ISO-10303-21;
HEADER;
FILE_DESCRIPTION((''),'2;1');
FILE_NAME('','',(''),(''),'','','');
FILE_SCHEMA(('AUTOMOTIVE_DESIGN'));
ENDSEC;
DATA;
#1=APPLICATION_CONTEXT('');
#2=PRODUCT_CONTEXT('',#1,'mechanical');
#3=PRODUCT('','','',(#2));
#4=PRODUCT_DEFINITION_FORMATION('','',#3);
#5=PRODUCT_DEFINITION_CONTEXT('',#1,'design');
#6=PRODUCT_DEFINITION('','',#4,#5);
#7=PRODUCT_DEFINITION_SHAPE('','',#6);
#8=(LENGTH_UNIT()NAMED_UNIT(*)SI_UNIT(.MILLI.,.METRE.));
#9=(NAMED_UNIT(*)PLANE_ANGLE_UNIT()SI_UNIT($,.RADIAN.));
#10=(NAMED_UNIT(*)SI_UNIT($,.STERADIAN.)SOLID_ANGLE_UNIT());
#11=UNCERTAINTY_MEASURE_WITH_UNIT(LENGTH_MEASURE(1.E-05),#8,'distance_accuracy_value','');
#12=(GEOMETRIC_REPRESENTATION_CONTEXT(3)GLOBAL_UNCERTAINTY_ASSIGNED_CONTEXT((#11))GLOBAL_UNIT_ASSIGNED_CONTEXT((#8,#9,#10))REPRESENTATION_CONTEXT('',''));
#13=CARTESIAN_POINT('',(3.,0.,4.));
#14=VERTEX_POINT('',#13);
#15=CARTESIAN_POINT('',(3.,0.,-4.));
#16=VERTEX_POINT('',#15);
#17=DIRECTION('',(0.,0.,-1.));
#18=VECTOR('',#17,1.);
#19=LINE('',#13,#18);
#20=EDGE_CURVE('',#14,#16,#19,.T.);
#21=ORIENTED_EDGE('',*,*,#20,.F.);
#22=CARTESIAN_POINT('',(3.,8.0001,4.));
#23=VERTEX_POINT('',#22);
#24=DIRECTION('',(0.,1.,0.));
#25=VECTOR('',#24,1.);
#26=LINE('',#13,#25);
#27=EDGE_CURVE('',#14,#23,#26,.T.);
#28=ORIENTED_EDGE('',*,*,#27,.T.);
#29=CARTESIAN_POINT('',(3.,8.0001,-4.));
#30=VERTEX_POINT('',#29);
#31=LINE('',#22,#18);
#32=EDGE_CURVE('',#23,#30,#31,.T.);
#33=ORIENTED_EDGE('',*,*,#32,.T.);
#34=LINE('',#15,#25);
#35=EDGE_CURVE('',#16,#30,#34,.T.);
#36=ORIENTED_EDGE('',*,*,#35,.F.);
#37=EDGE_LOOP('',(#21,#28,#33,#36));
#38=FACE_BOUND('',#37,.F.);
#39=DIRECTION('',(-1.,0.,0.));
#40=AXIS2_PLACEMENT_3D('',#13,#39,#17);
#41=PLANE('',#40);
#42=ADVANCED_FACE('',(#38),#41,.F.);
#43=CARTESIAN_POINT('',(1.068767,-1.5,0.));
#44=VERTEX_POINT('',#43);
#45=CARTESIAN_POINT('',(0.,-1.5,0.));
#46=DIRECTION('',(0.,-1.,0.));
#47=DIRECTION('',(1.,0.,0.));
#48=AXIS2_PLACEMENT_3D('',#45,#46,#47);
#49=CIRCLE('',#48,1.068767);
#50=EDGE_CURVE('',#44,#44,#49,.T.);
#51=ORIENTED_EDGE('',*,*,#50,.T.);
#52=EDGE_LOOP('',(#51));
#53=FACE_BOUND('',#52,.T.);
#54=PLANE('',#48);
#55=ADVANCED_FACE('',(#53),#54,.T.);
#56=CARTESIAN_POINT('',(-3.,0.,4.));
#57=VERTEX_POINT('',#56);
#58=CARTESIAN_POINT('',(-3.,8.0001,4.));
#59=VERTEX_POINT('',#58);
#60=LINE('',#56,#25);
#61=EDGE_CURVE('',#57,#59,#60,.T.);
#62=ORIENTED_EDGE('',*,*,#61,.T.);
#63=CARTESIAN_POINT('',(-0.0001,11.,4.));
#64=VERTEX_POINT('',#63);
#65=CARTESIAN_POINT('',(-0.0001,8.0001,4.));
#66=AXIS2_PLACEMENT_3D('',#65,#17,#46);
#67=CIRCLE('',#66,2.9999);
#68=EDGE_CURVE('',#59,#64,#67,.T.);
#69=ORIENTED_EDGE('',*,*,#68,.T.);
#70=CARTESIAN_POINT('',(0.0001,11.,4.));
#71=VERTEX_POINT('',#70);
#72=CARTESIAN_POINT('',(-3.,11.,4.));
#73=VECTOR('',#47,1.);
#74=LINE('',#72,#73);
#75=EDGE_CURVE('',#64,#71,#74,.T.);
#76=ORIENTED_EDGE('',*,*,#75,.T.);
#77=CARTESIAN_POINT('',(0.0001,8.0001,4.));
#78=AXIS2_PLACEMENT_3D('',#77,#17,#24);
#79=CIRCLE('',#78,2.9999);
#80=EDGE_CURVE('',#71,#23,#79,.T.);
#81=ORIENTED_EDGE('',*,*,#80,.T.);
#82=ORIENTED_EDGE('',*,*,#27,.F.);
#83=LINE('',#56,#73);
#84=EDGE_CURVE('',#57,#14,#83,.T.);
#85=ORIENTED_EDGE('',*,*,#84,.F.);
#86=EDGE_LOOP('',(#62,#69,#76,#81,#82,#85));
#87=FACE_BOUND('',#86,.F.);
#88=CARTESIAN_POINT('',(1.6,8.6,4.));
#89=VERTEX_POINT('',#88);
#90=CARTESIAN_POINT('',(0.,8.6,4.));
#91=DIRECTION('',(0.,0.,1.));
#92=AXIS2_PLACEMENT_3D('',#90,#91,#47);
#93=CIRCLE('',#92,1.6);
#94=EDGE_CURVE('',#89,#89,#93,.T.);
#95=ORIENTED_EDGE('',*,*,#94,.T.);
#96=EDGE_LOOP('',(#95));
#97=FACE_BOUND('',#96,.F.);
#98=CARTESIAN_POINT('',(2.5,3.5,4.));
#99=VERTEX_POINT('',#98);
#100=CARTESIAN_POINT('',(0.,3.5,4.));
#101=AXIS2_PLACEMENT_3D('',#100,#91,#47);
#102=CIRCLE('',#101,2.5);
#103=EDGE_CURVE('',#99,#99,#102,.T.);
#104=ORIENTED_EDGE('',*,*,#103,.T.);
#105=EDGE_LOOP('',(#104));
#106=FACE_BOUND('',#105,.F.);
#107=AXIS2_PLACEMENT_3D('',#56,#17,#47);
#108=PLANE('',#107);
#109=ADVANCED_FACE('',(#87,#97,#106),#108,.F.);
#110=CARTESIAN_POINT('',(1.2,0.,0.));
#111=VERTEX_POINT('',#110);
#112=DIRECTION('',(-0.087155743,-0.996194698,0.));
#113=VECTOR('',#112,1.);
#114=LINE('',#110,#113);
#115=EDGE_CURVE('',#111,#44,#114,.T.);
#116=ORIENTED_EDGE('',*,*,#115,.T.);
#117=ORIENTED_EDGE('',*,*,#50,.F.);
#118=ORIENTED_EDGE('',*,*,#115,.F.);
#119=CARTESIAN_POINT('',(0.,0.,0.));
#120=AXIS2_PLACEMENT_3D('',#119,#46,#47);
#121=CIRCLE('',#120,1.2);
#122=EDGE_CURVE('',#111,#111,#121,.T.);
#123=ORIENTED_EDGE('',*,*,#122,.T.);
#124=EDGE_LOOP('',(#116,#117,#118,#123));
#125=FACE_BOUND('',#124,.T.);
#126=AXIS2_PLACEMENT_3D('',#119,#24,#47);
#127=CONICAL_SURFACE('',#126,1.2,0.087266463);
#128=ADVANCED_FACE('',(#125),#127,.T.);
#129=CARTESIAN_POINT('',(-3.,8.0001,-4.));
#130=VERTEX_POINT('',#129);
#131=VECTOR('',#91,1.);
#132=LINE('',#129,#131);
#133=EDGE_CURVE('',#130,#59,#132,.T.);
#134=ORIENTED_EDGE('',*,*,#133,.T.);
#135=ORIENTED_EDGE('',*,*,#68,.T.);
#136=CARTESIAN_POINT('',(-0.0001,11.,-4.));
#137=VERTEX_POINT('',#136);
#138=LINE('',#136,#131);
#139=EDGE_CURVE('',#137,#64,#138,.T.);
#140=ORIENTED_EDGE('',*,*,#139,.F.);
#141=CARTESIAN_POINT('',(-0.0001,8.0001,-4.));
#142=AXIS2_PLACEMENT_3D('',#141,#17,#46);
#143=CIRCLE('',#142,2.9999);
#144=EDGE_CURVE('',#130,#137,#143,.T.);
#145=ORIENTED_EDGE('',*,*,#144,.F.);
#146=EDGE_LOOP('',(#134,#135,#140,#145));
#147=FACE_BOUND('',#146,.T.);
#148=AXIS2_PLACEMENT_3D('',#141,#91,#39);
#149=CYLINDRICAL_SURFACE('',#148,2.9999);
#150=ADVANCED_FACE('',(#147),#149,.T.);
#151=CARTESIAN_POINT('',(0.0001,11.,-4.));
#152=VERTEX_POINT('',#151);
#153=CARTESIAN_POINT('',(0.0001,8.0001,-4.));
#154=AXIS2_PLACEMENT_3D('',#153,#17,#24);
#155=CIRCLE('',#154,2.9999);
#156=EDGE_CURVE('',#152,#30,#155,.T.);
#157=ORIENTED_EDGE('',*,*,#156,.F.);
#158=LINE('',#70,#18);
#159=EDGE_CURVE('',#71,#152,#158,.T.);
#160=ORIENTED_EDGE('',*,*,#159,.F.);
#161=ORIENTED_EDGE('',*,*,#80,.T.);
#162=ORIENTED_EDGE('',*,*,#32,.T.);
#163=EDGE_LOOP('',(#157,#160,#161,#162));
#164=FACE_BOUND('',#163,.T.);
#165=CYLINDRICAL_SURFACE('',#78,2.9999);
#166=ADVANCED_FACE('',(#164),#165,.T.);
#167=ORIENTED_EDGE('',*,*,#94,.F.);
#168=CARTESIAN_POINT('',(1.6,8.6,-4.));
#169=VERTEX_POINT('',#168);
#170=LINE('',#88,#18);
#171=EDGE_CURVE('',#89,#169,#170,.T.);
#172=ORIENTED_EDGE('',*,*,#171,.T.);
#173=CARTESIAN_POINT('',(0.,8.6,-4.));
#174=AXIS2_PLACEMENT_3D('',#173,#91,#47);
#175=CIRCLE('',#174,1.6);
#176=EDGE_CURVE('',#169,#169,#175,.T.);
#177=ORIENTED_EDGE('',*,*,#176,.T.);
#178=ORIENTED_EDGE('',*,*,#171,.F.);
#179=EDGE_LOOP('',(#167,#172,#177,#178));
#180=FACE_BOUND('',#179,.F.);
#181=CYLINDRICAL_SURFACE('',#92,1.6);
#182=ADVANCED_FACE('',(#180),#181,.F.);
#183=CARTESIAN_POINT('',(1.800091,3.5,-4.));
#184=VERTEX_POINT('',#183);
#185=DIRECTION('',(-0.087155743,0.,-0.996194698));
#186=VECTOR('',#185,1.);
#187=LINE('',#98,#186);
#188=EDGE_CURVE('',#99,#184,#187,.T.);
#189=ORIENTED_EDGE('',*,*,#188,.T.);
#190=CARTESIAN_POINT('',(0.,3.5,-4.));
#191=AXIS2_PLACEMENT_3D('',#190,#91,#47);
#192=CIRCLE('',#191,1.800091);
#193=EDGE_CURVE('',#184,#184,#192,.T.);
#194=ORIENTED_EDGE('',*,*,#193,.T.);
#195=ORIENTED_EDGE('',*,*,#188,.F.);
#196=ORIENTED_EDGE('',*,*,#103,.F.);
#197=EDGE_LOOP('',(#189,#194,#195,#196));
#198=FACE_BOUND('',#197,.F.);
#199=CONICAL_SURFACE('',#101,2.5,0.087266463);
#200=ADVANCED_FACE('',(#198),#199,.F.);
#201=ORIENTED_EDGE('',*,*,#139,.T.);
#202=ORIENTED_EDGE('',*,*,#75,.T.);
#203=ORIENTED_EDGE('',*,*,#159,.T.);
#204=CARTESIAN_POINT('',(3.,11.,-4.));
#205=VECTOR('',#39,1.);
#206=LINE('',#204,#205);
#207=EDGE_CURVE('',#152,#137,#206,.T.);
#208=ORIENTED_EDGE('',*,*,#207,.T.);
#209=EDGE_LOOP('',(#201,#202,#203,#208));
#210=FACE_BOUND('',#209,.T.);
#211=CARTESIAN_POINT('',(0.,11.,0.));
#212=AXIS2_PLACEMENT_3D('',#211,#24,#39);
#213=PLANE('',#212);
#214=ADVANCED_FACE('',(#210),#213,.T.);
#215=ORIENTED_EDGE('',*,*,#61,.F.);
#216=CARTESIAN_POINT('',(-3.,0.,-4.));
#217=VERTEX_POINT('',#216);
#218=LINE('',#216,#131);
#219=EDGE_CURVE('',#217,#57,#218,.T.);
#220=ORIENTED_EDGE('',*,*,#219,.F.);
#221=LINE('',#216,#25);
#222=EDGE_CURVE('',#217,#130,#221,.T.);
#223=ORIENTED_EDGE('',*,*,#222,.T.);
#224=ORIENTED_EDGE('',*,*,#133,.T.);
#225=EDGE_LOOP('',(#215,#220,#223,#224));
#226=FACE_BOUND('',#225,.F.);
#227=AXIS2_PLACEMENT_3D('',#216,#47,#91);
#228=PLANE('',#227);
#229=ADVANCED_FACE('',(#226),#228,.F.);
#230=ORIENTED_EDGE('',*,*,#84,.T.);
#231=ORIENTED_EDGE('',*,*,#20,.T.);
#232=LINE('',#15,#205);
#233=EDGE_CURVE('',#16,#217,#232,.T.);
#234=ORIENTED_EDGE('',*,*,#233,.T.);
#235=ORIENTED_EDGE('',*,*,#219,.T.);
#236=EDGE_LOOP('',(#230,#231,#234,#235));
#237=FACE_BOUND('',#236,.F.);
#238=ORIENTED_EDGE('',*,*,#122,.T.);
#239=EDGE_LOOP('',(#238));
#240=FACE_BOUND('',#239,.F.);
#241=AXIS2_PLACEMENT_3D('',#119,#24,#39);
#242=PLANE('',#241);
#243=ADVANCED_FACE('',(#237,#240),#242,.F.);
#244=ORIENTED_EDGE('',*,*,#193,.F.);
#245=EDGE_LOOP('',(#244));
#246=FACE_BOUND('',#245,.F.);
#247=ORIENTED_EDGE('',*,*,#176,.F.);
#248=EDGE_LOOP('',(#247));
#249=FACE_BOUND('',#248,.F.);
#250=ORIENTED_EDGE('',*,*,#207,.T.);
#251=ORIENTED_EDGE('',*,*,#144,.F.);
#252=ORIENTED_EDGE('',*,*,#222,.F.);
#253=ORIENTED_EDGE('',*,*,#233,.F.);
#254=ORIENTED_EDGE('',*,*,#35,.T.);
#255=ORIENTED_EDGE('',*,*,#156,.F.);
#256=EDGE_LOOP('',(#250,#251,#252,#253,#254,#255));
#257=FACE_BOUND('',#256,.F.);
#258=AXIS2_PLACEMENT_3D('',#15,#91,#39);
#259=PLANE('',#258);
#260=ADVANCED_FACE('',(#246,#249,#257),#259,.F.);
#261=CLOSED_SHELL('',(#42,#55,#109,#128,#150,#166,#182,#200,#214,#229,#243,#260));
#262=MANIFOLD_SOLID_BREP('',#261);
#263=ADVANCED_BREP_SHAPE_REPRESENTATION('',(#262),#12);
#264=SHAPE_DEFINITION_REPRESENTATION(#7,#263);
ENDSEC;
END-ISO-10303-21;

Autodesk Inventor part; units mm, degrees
ref_plane "YZ Plane" through (0, 0, 0) normal (1, 0, 0) x (0, 1, 0)
ref_plane "XZ Plane" through (0, 0, 0) normal (0, 1, 0) x (-1, 0, 0)
ref_plane "XY Plane" through (0, 0, 0) normal (0, 0, 1) x (1, 0, 0)
sketch "Szkic3" plane through (0, 0, 0) normal (0, 1, 0) x (-1, 0, 0)
  line L0 (3, 4) -> (-3, 4)
  line L1 (-3, 4) -> (-3, -4)
  line L2 (-3, -4) -> (3, -4)
  line L3 (3, -4) -> (3, 4)
  line L4 (3, 4) -> (-3, -4) construction
  line L5 (-3, 4) -> (3, -4) construction
  point P0 (0, 0)
  dimension "d8" = 6
  dimension "d9" = 8
extrude "Wyciągnięcie proste2" add sketch "Szkic3" along normal blind 11
sketch "Szkic4" plane through (-3, 0, 4) normal (0, 0, 1) x (1, 0, 0)
  circle A0 centre (3, 3.5) radius 2.5
  line L0 (6, 0) -> (6, 11) projected
  line L1 (0, 0) -> (0, 11) projected
  circle A1 centre (3, 8.6) radius 1.6
  point P0 (3, 0)
  dimension "d12" = 5
  dimension "d13" = 3
  dimension "d14" = 3
  dimension "d15" = 3.5
  dimension "d16" = 3.2
  dimension "d17" = 5.1
extrude "Wyciągnięcie proste3" cut sketch "Szkic4" against normal up to next contours A1
extrude "Wyciągnięcie proste4" cut sketch "Szkic4" against normal up to next draft -5 contours A0
sketch "Szkic5" plane through (0, 0, 0) normal (0, -1, 0) x (1, 0, 0)
  circle A0 centre (0, 0) radius 1.2
  dimension "d22" = 2.4
extrude "Wyciągnięcie proste5" add sketch "Szkic5" along normal blind 1.5 draft -5
fillet "Fillet2" radius 3 2 edges at (-3, 11, 0) (3, 11, 0)
equation "\"d14\" = d13"
properties part number "mocowanieDiod"
